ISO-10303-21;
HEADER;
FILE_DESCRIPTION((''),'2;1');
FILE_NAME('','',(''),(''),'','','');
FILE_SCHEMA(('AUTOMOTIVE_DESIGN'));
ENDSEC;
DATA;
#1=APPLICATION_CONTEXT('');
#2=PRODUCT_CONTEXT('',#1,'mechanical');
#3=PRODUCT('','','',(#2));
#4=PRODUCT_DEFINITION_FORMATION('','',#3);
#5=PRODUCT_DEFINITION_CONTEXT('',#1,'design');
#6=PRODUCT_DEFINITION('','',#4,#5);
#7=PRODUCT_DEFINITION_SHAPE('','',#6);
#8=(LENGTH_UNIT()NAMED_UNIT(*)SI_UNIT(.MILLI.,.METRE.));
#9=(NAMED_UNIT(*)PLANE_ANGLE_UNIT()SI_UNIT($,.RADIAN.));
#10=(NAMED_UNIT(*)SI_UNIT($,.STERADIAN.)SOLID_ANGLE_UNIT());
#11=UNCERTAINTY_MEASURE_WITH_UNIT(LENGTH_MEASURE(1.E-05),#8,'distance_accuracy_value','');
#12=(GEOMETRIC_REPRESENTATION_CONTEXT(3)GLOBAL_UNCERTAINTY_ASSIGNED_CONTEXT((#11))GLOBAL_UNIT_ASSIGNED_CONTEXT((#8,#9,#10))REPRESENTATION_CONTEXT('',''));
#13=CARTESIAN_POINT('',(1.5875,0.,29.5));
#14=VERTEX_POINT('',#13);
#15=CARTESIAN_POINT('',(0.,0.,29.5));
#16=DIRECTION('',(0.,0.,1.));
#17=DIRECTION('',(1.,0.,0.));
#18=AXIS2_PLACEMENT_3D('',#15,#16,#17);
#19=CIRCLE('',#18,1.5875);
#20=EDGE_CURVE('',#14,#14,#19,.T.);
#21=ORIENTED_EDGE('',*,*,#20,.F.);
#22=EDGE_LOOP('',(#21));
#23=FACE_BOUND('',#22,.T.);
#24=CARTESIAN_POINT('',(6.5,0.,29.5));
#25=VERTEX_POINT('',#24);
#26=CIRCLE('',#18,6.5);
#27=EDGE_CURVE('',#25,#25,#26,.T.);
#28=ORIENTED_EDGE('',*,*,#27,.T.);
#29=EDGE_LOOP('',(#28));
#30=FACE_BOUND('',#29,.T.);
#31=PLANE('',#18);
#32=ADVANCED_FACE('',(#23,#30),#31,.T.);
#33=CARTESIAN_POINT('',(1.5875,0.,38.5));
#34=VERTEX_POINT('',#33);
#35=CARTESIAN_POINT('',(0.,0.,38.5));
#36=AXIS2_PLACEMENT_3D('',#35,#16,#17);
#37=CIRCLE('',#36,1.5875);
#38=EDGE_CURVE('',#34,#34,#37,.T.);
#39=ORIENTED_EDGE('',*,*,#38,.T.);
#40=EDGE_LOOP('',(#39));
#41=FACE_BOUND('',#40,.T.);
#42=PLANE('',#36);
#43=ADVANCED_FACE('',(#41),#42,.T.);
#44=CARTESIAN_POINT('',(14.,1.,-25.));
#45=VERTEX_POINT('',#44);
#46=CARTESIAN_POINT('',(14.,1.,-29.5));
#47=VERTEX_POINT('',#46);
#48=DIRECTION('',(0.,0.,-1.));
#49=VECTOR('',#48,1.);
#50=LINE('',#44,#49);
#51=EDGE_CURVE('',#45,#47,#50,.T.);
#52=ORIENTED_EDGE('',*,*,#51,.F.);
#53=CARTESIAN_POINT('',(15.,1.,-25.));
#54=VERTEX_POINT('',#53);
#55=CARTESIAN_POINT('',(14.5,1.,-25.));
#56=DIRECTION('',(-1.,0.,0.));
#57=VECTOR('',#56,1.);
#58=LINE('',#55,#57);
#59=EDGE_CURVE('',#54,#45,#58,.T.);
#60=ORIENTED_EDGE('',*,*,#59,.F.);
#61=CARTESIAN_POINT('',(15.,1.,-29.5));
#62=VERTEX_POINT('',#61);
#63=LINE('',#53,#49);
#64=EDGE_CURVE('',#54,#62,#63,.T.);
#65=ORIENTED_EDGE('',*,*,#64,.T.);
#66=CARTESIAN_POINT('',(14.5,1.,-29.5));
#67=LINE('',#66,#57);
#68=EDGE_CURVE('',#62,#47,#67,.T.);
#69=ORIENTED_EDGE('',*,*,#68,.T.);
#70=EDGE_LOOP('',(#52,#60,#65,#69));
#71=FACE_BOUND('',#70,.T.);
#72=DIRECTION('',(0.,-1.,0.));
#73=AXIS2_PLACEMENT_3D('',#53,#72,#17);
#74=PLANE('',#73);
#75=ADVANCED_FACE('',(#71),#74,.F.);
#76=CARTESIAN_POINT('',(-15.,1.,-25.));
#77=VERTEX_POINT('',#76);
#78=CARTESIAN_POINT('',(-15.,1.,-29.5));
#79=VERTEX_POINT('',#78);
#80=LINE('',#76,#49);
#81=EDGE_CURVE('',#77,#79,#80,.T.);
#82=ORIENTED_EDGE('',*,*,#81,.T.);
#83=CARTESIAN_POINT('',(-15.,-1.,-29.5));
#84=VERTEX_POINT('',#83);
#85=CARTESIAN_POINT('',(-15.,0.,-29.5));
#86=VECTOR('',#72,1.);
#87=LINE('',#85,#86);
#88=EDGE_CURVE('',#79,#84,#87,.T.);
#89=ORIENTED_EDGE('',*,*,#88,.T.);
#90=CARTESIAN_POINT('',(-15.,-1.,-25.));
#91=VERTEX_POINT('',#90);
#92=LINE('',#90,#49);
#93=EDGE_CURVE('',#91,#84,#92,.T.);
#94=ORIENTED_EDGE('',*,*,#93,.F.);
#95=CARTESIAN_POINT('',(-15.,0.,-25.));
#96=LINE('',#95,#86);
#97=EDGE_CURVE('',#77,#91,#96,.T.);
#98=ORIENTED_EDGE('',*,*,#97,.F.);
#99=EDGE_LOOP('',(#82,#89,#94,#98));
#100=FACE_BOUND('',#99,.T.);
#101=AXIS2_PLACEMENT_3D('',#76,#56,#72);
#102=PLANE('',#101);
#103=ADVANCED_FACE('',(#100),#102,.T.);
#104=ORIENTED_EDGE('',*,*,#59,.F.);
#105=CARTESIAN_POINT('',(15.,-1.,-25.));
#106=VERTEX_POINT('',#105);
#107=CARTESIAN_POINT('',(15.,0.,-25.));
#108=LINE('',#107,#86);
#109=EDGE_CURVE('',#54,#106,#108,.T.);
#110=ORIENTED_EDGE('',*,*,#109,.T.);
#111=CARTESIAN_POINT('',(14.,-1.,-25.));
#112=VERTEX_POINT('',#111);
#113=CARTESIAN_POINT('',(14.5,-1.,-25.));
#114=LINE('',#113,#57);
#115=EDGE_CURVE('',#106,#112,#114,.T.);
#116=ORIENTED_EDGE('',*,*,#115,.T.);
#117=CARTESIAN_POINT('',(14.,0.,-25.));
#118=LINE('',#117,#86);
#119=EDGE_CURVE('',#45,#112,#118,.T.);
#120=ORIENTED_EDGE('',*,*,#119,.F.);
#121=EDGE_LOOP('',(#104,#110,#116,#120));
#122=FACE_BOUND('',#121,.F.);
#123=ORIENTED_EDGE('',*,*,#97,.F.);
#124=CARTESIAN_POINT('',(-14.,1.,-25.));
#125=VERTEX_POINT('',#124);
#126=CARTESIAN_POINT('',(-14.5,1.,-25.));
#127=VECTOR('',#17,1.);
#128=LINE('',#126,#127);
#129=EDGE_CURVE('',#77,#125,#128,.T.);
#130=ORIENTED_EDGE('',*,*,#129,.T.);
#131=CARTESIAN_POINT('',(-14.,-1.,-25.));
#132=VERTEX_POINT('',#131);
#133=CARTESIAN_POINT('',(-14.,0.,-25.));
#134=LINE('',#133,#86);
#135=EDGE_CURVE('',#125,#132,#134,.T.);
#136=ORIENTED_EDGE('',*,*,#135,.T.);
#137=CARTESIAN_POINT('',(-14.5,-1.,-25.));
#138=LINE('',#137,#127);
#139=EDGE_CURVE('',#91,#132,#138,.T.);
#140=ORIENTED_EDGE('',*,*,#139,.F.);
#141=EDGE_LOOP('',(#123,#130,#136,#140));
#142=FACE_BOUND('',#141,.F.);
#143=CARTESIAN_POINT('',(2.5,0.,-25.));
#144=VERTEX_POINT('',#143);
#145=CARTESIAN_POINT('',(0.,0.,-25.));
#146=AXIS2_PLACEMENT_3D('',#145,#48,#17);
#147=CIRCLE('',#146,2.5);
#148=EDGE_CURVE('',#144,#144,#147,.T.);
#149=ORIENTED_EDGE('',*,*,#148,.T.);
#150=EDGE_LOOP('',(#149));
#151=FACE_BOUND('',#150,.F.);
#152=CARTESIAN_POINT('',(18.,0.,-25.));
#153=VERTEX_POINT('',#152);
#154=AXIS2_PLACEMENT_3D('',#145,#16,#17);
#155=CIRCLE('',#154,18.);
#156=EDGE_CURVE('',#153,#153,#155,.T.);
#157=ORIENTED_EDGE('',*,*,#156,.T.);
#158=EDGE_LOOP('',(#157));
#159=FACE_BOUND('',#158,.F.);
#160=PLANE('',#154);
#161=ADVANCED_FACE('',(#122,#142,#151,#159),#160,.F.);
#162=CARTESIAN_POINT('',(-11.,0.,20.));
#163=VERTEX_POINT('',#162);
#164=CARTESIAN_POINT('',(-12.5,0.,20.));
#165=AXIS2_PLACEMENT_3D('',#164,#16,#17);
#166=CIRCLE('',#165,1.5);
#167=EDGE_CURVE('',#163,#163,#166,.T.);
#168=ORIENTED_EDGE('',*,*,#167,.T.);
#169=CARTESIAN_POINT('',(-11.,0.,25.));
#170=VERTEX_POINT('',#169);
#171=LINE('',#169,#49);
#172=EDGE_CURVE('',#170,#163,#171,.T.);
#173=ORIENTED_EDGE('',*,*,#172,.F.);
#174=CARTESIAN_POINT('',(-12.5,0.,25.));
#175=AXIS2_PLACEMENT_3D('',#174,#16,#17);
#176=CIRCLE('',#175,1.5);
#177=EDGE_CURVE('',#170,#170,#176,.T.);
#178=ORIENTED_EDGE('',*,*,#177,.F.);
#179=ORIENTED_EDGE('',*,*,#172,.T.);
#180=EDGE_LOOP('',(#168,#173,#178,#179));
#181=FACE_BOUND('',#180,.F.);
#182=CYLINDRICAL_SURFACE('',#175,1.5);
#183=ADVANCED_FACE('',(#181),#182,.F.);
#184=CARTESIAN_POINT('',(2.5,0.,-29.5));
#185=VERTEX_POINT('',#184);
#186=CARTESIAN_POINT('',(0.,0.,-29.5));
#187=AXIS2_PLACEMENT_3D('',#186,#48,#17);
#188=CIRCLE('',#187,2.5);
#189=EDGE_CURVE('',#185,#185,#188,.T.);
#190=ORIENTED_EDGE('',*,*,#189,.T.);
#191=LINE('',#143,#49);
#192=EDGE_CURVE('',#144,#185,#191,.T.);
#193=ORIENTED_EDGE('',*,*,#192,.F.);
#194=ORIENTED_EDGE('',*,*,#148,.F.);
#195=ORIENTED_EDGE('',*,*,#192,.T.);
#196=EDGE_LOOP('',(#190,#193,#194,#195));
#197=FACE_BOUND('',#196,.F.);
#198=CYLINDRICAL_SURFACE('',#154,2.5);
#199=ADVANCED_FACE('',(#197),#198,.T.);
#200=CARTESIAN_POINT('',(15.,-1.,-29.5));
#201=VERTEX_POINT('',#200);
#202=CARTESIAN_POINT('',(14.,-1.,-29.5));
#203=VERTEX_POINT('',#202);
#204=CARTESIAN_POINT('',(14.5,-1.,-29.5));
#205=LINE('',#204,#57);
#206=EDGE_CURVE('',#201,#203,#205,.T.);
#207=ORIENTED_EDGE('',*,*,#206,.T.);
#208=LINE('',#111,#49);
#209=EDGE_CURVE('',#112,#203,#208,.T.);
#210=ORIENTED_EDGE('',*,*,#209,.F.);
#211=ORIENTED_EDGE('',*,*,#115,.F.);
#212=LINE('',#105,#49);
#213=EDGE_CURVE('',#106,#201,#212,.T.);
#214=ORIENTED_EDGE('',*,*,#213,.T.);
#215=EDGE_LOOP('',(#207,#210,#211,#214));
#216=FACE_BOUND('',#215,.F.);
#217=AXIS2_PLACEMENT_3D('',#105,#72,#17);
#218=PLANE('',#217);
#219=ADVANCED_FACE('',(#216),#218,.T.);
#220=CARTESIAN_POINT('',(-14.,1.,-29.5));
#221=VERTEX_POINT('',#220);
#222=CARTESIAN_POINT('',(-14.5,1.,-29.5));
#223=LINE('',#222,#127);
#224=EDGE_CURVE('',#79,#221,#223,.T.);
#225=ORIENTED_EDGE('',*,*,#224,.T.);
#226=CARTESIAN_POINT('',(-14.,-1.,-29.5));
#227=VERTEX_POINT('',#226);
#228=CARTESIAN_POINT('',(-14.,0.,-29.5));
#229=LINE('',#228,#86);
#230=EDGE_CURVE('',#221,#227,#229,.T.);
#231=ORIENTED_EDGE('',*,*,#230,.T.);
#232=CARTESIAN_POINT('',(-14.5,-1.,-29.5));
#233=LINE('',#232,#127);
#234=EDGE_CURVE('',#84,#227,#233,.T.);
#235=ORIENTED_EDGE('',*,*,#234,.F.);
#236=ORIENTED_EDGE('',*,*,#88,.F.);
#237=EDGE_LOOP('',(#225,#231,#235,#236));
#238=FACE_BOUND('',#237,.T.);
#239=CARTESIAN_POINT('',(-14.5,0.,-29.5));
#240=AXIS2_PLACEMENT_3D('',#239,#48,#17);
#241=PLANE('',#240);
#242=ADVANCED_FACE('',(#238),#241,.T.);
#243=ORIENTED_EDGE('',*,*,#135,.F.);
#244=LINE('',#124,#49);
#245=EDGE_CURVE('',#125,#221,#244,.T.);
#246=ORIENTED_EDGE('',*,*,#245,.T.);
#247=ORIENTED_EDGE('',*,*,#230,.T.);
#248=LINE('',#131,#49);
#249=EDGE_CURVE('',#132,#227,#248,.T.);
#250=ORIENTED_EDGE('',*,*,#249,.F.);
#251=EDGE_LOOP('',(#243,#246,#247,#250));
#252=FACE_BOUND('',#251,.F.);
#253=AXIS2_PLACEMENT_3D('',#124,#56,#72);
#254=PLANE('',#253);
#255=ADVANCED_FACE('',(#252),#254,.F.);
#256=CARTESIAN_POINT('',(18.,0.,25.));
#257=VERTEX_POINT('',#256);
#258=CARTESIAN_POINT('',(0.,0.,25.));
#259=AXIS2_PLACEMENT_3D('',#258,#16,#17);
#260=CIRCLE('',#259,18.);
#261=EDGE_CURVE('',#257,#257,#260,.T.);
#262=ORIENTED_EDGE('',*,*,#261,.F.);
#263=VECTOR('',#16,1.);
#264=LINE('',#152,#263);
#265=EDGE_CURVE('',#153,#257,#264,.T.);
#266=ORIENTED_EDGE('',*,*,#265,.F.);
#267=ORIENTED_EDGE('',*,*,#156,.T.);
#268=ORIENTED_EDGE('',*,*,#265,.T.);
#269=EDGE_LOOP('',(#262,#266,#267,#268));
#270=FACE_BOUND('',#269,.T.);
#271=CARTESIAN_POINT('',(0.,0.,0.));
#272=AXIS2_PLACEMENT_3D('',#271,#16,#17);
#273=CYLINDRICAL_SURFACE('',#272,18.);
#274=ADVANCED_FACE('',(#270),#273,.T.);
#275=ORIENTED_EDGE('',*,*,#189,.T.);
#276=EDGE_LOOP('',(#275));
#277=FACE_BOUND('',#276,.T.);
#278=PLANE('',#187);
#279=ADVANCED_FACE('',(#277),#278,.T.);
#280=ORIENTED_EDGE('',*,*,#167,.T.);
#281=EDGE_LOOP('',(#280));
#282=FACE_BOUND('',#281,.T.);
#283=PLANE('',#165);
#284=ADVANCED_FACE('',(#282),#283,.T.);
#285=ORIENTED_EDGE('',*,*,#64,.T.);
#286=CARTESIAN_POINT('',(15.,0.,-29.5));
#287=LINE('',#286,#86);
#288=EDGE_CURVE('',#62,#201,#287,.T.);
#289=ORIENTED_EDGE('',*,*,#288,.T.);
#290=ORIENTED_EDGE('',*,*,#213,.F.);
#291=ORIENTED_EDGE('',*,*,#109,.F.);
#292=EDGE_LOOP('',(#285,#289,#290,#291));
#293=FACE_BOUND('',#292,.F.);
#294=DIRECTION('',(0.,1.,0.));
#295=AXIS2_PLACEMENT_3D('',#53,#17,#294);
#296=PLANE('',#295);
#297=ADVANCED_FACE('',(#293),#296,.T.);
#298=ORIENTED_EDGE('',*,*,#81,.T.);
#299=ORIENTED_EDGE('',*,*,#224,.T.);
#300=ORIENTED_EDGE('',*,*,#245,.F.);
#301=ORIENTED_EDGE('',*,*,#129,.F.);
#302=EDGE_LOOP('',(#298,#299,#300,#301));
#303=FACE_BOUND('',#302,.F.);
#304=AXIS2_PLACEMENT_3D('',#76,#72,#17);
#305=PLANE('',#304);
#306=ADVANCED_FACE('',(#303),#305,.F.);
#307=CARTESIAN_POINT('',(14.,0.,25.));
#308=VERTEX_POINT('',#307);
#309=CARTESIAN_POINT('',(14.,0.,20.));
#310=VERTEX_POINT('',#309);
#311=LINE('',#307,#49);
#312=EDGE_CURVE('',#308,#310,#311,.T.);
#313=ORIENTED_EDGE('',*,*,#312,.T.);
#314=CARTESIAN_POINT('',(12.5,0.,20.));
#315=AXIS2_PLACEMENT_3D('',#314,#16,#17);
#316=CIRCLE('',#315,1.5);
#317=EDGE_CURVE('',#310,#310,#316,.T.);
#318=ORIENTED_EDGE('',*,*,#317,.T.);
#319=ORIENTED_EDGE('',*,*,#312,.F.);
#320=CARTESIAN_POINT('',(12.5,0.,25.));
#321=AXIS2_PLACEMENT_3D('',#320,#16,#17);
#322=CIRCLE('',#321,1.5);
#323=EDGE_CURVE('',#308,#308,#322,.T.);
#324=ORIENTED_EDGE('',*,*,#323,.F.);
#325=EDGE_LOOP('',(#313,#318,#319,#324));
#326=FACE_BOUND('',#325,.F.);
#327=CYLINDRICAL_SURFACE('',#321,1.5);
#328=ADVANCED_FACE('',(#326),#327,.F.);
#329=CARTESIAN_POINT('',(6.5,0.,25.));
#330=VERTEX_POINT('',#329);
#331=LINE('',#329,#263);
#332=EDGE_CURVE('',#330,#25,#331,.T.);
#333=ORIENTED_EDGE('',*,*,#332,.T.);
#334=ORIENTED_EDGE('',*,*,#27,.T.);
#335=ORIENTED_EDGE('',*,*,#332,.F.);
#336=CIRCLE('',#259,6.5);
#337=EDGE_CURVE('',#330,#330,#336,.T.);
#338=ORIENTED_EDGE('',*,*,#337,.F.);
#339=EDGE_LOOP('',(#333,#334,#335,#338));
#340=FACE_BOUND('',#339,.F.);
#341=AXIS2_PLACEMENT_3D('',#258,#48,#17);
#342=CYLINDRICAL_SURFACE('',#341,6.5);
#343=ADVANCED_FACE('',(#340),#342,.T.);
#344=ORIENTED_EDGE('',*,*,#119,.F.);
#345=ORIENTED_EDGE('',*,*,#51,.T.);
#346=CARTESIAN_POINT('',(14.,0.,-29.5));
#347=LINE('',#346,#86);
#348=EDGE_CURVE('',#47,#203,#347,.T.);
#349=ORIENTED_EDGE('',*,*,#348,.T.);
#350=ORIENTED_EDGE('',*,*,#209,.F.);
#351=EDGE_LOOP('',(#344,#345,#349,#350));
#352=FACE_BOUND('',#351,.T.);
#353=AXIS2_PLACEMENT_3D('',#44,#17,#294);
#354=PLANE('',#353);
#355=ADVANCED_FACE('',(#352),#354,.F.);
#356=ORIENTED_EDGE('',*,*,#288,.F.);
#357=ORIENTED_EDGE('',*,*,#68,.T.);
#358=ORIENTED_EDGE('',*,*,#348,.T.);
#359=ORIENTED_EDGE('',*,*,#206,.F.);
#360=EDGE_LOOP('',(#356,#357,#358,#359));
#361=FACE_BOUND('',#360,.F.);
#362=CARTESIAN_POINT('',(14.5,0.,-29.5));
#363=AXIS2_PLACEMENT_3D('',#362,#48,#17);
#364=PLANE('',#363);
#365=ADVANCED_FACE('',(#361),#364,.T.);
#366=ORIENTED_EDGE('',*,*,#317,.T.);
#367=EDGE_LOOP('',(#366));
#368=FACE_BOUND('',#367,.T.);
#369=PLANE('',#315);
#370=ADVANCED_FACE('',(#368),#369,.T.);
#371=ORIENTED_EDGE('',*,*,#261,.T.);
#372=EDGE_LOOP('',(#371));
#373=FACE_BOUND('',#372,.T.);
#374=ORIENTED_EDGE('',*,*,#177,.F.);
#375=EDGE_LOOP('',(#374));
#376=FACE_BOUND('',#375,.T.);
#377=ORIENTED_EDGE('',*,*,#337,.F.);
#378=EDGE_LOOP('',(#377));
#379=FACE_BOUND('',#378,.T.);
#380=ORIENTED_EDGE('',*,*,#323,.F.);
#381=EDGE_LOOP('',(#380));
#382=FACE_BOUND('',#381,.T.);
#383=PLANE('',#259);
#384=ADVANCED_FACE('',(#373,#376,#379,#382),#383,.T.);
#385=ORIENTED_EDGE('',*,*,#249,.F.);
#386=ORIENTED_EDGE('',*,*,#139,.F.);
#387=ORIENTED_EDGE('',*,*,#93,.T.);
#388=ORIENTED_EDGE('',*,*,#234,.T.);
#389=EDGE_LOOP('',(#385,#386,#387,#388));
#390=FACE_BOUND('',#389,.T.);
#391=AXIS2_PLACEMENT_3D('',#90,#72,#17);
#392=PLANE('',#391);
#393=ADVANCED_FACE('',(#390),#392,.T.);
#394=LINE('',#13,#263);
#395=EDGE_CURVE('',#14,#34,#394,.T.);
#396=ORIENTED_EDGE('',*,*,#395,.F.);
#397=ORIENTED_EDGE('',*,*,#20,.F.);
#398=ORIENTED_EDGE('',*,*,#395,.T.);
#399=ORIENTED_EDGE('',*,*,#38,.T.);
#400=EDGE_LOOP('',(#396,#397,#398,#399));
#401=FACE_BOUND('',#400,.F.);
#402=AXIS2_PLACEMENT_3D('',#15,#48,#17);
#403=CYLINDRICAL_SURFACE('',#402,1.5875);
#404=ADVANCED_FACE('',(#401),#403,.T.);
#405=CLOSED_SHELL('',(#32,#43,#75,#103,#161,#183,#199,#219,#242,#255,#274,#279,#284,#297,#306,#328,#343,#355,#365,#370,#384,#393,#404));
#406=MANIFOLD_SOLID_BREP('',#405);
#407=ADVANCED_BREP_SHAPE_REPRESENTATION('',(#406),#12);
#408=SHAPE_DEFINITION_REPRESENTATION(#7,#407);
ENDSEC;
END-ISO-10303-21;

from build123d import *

# Parameters (mm, degrees)
F0_R      = 18
F1_DEPTH  = 25
F2_R      = 6.5
F3_DEPTH  = 4.5
F4_R      = 1.5875
F5_DEPTH  = 9
F6_W      = 1
F6_H      = 2
F7_DEPTH  = 4.5
F8_R      = 1.5
F9_DEPTH  = 5
F10_R     = 2.5
F11_DEPTH = 4.5


# Not quite as in the source:
# - a pattern or mirror of a feature is missing from the dataset's text; its kind, count and spacing are read off the source's solid


with BuildPart() as f1:
    # F0 (on Top) → F1 (new body, symmetric)
    with BuildSketch(Plane.XY):
        Circle(F0_R)
    extrude(amount=F1_DEPTH, both=True)

    # F2 (on face) → F3 (join)
    with BuildSketch(Plane.XY.offset(25)):
        Circle(F2_R)
    extrude(amount=F3_DEPTH)

    # F4 (on face) → F5 (join)
    with BuildSketch(Plane.XY.offset(29.5)):
        Circle(F4_R)
    extrude(amount=F5_DEPTH)

    # F6 (on face) → F7 (join)
    with BuildSketch(Plane(origin=(0, 0, -25), x_dir=(1, 0, 0), z_dir=(0, 0, -1))):
        with Locations((-14.5, 0)):
            Rectangle(F6_W, F6_H)
    f7 = extrude(amount=F7_DEPTH)

    # F7_copies: F7 across plane
    add(f7.mirror(Plane(origin=(0, 0, 0), x_dir=(0, 0, 1), z_dir=(1, 0, 0))))

    # F8 (on face) → F9 (cut)
    with BuildSketch(Plane.XY.offset(25)):
        with Locations((12.5, 0)):
            Circle(F8_R)
        with Locations((-12.5, 0)):
            Circle(F8_R)
    extrude(amount=-F9_DEPTH, mode=Mode.SUBTRACT)

    # F10 (on face) → F11 (join)
    with BuildSketch(Plane(origin=(0, 0, -25), x_dir=(1, 0, 0), z_dir=(0, 0, -1))):
        Circle(F10_R)
    extrude(amount=F11_DEPTH)


solid = f1.part
